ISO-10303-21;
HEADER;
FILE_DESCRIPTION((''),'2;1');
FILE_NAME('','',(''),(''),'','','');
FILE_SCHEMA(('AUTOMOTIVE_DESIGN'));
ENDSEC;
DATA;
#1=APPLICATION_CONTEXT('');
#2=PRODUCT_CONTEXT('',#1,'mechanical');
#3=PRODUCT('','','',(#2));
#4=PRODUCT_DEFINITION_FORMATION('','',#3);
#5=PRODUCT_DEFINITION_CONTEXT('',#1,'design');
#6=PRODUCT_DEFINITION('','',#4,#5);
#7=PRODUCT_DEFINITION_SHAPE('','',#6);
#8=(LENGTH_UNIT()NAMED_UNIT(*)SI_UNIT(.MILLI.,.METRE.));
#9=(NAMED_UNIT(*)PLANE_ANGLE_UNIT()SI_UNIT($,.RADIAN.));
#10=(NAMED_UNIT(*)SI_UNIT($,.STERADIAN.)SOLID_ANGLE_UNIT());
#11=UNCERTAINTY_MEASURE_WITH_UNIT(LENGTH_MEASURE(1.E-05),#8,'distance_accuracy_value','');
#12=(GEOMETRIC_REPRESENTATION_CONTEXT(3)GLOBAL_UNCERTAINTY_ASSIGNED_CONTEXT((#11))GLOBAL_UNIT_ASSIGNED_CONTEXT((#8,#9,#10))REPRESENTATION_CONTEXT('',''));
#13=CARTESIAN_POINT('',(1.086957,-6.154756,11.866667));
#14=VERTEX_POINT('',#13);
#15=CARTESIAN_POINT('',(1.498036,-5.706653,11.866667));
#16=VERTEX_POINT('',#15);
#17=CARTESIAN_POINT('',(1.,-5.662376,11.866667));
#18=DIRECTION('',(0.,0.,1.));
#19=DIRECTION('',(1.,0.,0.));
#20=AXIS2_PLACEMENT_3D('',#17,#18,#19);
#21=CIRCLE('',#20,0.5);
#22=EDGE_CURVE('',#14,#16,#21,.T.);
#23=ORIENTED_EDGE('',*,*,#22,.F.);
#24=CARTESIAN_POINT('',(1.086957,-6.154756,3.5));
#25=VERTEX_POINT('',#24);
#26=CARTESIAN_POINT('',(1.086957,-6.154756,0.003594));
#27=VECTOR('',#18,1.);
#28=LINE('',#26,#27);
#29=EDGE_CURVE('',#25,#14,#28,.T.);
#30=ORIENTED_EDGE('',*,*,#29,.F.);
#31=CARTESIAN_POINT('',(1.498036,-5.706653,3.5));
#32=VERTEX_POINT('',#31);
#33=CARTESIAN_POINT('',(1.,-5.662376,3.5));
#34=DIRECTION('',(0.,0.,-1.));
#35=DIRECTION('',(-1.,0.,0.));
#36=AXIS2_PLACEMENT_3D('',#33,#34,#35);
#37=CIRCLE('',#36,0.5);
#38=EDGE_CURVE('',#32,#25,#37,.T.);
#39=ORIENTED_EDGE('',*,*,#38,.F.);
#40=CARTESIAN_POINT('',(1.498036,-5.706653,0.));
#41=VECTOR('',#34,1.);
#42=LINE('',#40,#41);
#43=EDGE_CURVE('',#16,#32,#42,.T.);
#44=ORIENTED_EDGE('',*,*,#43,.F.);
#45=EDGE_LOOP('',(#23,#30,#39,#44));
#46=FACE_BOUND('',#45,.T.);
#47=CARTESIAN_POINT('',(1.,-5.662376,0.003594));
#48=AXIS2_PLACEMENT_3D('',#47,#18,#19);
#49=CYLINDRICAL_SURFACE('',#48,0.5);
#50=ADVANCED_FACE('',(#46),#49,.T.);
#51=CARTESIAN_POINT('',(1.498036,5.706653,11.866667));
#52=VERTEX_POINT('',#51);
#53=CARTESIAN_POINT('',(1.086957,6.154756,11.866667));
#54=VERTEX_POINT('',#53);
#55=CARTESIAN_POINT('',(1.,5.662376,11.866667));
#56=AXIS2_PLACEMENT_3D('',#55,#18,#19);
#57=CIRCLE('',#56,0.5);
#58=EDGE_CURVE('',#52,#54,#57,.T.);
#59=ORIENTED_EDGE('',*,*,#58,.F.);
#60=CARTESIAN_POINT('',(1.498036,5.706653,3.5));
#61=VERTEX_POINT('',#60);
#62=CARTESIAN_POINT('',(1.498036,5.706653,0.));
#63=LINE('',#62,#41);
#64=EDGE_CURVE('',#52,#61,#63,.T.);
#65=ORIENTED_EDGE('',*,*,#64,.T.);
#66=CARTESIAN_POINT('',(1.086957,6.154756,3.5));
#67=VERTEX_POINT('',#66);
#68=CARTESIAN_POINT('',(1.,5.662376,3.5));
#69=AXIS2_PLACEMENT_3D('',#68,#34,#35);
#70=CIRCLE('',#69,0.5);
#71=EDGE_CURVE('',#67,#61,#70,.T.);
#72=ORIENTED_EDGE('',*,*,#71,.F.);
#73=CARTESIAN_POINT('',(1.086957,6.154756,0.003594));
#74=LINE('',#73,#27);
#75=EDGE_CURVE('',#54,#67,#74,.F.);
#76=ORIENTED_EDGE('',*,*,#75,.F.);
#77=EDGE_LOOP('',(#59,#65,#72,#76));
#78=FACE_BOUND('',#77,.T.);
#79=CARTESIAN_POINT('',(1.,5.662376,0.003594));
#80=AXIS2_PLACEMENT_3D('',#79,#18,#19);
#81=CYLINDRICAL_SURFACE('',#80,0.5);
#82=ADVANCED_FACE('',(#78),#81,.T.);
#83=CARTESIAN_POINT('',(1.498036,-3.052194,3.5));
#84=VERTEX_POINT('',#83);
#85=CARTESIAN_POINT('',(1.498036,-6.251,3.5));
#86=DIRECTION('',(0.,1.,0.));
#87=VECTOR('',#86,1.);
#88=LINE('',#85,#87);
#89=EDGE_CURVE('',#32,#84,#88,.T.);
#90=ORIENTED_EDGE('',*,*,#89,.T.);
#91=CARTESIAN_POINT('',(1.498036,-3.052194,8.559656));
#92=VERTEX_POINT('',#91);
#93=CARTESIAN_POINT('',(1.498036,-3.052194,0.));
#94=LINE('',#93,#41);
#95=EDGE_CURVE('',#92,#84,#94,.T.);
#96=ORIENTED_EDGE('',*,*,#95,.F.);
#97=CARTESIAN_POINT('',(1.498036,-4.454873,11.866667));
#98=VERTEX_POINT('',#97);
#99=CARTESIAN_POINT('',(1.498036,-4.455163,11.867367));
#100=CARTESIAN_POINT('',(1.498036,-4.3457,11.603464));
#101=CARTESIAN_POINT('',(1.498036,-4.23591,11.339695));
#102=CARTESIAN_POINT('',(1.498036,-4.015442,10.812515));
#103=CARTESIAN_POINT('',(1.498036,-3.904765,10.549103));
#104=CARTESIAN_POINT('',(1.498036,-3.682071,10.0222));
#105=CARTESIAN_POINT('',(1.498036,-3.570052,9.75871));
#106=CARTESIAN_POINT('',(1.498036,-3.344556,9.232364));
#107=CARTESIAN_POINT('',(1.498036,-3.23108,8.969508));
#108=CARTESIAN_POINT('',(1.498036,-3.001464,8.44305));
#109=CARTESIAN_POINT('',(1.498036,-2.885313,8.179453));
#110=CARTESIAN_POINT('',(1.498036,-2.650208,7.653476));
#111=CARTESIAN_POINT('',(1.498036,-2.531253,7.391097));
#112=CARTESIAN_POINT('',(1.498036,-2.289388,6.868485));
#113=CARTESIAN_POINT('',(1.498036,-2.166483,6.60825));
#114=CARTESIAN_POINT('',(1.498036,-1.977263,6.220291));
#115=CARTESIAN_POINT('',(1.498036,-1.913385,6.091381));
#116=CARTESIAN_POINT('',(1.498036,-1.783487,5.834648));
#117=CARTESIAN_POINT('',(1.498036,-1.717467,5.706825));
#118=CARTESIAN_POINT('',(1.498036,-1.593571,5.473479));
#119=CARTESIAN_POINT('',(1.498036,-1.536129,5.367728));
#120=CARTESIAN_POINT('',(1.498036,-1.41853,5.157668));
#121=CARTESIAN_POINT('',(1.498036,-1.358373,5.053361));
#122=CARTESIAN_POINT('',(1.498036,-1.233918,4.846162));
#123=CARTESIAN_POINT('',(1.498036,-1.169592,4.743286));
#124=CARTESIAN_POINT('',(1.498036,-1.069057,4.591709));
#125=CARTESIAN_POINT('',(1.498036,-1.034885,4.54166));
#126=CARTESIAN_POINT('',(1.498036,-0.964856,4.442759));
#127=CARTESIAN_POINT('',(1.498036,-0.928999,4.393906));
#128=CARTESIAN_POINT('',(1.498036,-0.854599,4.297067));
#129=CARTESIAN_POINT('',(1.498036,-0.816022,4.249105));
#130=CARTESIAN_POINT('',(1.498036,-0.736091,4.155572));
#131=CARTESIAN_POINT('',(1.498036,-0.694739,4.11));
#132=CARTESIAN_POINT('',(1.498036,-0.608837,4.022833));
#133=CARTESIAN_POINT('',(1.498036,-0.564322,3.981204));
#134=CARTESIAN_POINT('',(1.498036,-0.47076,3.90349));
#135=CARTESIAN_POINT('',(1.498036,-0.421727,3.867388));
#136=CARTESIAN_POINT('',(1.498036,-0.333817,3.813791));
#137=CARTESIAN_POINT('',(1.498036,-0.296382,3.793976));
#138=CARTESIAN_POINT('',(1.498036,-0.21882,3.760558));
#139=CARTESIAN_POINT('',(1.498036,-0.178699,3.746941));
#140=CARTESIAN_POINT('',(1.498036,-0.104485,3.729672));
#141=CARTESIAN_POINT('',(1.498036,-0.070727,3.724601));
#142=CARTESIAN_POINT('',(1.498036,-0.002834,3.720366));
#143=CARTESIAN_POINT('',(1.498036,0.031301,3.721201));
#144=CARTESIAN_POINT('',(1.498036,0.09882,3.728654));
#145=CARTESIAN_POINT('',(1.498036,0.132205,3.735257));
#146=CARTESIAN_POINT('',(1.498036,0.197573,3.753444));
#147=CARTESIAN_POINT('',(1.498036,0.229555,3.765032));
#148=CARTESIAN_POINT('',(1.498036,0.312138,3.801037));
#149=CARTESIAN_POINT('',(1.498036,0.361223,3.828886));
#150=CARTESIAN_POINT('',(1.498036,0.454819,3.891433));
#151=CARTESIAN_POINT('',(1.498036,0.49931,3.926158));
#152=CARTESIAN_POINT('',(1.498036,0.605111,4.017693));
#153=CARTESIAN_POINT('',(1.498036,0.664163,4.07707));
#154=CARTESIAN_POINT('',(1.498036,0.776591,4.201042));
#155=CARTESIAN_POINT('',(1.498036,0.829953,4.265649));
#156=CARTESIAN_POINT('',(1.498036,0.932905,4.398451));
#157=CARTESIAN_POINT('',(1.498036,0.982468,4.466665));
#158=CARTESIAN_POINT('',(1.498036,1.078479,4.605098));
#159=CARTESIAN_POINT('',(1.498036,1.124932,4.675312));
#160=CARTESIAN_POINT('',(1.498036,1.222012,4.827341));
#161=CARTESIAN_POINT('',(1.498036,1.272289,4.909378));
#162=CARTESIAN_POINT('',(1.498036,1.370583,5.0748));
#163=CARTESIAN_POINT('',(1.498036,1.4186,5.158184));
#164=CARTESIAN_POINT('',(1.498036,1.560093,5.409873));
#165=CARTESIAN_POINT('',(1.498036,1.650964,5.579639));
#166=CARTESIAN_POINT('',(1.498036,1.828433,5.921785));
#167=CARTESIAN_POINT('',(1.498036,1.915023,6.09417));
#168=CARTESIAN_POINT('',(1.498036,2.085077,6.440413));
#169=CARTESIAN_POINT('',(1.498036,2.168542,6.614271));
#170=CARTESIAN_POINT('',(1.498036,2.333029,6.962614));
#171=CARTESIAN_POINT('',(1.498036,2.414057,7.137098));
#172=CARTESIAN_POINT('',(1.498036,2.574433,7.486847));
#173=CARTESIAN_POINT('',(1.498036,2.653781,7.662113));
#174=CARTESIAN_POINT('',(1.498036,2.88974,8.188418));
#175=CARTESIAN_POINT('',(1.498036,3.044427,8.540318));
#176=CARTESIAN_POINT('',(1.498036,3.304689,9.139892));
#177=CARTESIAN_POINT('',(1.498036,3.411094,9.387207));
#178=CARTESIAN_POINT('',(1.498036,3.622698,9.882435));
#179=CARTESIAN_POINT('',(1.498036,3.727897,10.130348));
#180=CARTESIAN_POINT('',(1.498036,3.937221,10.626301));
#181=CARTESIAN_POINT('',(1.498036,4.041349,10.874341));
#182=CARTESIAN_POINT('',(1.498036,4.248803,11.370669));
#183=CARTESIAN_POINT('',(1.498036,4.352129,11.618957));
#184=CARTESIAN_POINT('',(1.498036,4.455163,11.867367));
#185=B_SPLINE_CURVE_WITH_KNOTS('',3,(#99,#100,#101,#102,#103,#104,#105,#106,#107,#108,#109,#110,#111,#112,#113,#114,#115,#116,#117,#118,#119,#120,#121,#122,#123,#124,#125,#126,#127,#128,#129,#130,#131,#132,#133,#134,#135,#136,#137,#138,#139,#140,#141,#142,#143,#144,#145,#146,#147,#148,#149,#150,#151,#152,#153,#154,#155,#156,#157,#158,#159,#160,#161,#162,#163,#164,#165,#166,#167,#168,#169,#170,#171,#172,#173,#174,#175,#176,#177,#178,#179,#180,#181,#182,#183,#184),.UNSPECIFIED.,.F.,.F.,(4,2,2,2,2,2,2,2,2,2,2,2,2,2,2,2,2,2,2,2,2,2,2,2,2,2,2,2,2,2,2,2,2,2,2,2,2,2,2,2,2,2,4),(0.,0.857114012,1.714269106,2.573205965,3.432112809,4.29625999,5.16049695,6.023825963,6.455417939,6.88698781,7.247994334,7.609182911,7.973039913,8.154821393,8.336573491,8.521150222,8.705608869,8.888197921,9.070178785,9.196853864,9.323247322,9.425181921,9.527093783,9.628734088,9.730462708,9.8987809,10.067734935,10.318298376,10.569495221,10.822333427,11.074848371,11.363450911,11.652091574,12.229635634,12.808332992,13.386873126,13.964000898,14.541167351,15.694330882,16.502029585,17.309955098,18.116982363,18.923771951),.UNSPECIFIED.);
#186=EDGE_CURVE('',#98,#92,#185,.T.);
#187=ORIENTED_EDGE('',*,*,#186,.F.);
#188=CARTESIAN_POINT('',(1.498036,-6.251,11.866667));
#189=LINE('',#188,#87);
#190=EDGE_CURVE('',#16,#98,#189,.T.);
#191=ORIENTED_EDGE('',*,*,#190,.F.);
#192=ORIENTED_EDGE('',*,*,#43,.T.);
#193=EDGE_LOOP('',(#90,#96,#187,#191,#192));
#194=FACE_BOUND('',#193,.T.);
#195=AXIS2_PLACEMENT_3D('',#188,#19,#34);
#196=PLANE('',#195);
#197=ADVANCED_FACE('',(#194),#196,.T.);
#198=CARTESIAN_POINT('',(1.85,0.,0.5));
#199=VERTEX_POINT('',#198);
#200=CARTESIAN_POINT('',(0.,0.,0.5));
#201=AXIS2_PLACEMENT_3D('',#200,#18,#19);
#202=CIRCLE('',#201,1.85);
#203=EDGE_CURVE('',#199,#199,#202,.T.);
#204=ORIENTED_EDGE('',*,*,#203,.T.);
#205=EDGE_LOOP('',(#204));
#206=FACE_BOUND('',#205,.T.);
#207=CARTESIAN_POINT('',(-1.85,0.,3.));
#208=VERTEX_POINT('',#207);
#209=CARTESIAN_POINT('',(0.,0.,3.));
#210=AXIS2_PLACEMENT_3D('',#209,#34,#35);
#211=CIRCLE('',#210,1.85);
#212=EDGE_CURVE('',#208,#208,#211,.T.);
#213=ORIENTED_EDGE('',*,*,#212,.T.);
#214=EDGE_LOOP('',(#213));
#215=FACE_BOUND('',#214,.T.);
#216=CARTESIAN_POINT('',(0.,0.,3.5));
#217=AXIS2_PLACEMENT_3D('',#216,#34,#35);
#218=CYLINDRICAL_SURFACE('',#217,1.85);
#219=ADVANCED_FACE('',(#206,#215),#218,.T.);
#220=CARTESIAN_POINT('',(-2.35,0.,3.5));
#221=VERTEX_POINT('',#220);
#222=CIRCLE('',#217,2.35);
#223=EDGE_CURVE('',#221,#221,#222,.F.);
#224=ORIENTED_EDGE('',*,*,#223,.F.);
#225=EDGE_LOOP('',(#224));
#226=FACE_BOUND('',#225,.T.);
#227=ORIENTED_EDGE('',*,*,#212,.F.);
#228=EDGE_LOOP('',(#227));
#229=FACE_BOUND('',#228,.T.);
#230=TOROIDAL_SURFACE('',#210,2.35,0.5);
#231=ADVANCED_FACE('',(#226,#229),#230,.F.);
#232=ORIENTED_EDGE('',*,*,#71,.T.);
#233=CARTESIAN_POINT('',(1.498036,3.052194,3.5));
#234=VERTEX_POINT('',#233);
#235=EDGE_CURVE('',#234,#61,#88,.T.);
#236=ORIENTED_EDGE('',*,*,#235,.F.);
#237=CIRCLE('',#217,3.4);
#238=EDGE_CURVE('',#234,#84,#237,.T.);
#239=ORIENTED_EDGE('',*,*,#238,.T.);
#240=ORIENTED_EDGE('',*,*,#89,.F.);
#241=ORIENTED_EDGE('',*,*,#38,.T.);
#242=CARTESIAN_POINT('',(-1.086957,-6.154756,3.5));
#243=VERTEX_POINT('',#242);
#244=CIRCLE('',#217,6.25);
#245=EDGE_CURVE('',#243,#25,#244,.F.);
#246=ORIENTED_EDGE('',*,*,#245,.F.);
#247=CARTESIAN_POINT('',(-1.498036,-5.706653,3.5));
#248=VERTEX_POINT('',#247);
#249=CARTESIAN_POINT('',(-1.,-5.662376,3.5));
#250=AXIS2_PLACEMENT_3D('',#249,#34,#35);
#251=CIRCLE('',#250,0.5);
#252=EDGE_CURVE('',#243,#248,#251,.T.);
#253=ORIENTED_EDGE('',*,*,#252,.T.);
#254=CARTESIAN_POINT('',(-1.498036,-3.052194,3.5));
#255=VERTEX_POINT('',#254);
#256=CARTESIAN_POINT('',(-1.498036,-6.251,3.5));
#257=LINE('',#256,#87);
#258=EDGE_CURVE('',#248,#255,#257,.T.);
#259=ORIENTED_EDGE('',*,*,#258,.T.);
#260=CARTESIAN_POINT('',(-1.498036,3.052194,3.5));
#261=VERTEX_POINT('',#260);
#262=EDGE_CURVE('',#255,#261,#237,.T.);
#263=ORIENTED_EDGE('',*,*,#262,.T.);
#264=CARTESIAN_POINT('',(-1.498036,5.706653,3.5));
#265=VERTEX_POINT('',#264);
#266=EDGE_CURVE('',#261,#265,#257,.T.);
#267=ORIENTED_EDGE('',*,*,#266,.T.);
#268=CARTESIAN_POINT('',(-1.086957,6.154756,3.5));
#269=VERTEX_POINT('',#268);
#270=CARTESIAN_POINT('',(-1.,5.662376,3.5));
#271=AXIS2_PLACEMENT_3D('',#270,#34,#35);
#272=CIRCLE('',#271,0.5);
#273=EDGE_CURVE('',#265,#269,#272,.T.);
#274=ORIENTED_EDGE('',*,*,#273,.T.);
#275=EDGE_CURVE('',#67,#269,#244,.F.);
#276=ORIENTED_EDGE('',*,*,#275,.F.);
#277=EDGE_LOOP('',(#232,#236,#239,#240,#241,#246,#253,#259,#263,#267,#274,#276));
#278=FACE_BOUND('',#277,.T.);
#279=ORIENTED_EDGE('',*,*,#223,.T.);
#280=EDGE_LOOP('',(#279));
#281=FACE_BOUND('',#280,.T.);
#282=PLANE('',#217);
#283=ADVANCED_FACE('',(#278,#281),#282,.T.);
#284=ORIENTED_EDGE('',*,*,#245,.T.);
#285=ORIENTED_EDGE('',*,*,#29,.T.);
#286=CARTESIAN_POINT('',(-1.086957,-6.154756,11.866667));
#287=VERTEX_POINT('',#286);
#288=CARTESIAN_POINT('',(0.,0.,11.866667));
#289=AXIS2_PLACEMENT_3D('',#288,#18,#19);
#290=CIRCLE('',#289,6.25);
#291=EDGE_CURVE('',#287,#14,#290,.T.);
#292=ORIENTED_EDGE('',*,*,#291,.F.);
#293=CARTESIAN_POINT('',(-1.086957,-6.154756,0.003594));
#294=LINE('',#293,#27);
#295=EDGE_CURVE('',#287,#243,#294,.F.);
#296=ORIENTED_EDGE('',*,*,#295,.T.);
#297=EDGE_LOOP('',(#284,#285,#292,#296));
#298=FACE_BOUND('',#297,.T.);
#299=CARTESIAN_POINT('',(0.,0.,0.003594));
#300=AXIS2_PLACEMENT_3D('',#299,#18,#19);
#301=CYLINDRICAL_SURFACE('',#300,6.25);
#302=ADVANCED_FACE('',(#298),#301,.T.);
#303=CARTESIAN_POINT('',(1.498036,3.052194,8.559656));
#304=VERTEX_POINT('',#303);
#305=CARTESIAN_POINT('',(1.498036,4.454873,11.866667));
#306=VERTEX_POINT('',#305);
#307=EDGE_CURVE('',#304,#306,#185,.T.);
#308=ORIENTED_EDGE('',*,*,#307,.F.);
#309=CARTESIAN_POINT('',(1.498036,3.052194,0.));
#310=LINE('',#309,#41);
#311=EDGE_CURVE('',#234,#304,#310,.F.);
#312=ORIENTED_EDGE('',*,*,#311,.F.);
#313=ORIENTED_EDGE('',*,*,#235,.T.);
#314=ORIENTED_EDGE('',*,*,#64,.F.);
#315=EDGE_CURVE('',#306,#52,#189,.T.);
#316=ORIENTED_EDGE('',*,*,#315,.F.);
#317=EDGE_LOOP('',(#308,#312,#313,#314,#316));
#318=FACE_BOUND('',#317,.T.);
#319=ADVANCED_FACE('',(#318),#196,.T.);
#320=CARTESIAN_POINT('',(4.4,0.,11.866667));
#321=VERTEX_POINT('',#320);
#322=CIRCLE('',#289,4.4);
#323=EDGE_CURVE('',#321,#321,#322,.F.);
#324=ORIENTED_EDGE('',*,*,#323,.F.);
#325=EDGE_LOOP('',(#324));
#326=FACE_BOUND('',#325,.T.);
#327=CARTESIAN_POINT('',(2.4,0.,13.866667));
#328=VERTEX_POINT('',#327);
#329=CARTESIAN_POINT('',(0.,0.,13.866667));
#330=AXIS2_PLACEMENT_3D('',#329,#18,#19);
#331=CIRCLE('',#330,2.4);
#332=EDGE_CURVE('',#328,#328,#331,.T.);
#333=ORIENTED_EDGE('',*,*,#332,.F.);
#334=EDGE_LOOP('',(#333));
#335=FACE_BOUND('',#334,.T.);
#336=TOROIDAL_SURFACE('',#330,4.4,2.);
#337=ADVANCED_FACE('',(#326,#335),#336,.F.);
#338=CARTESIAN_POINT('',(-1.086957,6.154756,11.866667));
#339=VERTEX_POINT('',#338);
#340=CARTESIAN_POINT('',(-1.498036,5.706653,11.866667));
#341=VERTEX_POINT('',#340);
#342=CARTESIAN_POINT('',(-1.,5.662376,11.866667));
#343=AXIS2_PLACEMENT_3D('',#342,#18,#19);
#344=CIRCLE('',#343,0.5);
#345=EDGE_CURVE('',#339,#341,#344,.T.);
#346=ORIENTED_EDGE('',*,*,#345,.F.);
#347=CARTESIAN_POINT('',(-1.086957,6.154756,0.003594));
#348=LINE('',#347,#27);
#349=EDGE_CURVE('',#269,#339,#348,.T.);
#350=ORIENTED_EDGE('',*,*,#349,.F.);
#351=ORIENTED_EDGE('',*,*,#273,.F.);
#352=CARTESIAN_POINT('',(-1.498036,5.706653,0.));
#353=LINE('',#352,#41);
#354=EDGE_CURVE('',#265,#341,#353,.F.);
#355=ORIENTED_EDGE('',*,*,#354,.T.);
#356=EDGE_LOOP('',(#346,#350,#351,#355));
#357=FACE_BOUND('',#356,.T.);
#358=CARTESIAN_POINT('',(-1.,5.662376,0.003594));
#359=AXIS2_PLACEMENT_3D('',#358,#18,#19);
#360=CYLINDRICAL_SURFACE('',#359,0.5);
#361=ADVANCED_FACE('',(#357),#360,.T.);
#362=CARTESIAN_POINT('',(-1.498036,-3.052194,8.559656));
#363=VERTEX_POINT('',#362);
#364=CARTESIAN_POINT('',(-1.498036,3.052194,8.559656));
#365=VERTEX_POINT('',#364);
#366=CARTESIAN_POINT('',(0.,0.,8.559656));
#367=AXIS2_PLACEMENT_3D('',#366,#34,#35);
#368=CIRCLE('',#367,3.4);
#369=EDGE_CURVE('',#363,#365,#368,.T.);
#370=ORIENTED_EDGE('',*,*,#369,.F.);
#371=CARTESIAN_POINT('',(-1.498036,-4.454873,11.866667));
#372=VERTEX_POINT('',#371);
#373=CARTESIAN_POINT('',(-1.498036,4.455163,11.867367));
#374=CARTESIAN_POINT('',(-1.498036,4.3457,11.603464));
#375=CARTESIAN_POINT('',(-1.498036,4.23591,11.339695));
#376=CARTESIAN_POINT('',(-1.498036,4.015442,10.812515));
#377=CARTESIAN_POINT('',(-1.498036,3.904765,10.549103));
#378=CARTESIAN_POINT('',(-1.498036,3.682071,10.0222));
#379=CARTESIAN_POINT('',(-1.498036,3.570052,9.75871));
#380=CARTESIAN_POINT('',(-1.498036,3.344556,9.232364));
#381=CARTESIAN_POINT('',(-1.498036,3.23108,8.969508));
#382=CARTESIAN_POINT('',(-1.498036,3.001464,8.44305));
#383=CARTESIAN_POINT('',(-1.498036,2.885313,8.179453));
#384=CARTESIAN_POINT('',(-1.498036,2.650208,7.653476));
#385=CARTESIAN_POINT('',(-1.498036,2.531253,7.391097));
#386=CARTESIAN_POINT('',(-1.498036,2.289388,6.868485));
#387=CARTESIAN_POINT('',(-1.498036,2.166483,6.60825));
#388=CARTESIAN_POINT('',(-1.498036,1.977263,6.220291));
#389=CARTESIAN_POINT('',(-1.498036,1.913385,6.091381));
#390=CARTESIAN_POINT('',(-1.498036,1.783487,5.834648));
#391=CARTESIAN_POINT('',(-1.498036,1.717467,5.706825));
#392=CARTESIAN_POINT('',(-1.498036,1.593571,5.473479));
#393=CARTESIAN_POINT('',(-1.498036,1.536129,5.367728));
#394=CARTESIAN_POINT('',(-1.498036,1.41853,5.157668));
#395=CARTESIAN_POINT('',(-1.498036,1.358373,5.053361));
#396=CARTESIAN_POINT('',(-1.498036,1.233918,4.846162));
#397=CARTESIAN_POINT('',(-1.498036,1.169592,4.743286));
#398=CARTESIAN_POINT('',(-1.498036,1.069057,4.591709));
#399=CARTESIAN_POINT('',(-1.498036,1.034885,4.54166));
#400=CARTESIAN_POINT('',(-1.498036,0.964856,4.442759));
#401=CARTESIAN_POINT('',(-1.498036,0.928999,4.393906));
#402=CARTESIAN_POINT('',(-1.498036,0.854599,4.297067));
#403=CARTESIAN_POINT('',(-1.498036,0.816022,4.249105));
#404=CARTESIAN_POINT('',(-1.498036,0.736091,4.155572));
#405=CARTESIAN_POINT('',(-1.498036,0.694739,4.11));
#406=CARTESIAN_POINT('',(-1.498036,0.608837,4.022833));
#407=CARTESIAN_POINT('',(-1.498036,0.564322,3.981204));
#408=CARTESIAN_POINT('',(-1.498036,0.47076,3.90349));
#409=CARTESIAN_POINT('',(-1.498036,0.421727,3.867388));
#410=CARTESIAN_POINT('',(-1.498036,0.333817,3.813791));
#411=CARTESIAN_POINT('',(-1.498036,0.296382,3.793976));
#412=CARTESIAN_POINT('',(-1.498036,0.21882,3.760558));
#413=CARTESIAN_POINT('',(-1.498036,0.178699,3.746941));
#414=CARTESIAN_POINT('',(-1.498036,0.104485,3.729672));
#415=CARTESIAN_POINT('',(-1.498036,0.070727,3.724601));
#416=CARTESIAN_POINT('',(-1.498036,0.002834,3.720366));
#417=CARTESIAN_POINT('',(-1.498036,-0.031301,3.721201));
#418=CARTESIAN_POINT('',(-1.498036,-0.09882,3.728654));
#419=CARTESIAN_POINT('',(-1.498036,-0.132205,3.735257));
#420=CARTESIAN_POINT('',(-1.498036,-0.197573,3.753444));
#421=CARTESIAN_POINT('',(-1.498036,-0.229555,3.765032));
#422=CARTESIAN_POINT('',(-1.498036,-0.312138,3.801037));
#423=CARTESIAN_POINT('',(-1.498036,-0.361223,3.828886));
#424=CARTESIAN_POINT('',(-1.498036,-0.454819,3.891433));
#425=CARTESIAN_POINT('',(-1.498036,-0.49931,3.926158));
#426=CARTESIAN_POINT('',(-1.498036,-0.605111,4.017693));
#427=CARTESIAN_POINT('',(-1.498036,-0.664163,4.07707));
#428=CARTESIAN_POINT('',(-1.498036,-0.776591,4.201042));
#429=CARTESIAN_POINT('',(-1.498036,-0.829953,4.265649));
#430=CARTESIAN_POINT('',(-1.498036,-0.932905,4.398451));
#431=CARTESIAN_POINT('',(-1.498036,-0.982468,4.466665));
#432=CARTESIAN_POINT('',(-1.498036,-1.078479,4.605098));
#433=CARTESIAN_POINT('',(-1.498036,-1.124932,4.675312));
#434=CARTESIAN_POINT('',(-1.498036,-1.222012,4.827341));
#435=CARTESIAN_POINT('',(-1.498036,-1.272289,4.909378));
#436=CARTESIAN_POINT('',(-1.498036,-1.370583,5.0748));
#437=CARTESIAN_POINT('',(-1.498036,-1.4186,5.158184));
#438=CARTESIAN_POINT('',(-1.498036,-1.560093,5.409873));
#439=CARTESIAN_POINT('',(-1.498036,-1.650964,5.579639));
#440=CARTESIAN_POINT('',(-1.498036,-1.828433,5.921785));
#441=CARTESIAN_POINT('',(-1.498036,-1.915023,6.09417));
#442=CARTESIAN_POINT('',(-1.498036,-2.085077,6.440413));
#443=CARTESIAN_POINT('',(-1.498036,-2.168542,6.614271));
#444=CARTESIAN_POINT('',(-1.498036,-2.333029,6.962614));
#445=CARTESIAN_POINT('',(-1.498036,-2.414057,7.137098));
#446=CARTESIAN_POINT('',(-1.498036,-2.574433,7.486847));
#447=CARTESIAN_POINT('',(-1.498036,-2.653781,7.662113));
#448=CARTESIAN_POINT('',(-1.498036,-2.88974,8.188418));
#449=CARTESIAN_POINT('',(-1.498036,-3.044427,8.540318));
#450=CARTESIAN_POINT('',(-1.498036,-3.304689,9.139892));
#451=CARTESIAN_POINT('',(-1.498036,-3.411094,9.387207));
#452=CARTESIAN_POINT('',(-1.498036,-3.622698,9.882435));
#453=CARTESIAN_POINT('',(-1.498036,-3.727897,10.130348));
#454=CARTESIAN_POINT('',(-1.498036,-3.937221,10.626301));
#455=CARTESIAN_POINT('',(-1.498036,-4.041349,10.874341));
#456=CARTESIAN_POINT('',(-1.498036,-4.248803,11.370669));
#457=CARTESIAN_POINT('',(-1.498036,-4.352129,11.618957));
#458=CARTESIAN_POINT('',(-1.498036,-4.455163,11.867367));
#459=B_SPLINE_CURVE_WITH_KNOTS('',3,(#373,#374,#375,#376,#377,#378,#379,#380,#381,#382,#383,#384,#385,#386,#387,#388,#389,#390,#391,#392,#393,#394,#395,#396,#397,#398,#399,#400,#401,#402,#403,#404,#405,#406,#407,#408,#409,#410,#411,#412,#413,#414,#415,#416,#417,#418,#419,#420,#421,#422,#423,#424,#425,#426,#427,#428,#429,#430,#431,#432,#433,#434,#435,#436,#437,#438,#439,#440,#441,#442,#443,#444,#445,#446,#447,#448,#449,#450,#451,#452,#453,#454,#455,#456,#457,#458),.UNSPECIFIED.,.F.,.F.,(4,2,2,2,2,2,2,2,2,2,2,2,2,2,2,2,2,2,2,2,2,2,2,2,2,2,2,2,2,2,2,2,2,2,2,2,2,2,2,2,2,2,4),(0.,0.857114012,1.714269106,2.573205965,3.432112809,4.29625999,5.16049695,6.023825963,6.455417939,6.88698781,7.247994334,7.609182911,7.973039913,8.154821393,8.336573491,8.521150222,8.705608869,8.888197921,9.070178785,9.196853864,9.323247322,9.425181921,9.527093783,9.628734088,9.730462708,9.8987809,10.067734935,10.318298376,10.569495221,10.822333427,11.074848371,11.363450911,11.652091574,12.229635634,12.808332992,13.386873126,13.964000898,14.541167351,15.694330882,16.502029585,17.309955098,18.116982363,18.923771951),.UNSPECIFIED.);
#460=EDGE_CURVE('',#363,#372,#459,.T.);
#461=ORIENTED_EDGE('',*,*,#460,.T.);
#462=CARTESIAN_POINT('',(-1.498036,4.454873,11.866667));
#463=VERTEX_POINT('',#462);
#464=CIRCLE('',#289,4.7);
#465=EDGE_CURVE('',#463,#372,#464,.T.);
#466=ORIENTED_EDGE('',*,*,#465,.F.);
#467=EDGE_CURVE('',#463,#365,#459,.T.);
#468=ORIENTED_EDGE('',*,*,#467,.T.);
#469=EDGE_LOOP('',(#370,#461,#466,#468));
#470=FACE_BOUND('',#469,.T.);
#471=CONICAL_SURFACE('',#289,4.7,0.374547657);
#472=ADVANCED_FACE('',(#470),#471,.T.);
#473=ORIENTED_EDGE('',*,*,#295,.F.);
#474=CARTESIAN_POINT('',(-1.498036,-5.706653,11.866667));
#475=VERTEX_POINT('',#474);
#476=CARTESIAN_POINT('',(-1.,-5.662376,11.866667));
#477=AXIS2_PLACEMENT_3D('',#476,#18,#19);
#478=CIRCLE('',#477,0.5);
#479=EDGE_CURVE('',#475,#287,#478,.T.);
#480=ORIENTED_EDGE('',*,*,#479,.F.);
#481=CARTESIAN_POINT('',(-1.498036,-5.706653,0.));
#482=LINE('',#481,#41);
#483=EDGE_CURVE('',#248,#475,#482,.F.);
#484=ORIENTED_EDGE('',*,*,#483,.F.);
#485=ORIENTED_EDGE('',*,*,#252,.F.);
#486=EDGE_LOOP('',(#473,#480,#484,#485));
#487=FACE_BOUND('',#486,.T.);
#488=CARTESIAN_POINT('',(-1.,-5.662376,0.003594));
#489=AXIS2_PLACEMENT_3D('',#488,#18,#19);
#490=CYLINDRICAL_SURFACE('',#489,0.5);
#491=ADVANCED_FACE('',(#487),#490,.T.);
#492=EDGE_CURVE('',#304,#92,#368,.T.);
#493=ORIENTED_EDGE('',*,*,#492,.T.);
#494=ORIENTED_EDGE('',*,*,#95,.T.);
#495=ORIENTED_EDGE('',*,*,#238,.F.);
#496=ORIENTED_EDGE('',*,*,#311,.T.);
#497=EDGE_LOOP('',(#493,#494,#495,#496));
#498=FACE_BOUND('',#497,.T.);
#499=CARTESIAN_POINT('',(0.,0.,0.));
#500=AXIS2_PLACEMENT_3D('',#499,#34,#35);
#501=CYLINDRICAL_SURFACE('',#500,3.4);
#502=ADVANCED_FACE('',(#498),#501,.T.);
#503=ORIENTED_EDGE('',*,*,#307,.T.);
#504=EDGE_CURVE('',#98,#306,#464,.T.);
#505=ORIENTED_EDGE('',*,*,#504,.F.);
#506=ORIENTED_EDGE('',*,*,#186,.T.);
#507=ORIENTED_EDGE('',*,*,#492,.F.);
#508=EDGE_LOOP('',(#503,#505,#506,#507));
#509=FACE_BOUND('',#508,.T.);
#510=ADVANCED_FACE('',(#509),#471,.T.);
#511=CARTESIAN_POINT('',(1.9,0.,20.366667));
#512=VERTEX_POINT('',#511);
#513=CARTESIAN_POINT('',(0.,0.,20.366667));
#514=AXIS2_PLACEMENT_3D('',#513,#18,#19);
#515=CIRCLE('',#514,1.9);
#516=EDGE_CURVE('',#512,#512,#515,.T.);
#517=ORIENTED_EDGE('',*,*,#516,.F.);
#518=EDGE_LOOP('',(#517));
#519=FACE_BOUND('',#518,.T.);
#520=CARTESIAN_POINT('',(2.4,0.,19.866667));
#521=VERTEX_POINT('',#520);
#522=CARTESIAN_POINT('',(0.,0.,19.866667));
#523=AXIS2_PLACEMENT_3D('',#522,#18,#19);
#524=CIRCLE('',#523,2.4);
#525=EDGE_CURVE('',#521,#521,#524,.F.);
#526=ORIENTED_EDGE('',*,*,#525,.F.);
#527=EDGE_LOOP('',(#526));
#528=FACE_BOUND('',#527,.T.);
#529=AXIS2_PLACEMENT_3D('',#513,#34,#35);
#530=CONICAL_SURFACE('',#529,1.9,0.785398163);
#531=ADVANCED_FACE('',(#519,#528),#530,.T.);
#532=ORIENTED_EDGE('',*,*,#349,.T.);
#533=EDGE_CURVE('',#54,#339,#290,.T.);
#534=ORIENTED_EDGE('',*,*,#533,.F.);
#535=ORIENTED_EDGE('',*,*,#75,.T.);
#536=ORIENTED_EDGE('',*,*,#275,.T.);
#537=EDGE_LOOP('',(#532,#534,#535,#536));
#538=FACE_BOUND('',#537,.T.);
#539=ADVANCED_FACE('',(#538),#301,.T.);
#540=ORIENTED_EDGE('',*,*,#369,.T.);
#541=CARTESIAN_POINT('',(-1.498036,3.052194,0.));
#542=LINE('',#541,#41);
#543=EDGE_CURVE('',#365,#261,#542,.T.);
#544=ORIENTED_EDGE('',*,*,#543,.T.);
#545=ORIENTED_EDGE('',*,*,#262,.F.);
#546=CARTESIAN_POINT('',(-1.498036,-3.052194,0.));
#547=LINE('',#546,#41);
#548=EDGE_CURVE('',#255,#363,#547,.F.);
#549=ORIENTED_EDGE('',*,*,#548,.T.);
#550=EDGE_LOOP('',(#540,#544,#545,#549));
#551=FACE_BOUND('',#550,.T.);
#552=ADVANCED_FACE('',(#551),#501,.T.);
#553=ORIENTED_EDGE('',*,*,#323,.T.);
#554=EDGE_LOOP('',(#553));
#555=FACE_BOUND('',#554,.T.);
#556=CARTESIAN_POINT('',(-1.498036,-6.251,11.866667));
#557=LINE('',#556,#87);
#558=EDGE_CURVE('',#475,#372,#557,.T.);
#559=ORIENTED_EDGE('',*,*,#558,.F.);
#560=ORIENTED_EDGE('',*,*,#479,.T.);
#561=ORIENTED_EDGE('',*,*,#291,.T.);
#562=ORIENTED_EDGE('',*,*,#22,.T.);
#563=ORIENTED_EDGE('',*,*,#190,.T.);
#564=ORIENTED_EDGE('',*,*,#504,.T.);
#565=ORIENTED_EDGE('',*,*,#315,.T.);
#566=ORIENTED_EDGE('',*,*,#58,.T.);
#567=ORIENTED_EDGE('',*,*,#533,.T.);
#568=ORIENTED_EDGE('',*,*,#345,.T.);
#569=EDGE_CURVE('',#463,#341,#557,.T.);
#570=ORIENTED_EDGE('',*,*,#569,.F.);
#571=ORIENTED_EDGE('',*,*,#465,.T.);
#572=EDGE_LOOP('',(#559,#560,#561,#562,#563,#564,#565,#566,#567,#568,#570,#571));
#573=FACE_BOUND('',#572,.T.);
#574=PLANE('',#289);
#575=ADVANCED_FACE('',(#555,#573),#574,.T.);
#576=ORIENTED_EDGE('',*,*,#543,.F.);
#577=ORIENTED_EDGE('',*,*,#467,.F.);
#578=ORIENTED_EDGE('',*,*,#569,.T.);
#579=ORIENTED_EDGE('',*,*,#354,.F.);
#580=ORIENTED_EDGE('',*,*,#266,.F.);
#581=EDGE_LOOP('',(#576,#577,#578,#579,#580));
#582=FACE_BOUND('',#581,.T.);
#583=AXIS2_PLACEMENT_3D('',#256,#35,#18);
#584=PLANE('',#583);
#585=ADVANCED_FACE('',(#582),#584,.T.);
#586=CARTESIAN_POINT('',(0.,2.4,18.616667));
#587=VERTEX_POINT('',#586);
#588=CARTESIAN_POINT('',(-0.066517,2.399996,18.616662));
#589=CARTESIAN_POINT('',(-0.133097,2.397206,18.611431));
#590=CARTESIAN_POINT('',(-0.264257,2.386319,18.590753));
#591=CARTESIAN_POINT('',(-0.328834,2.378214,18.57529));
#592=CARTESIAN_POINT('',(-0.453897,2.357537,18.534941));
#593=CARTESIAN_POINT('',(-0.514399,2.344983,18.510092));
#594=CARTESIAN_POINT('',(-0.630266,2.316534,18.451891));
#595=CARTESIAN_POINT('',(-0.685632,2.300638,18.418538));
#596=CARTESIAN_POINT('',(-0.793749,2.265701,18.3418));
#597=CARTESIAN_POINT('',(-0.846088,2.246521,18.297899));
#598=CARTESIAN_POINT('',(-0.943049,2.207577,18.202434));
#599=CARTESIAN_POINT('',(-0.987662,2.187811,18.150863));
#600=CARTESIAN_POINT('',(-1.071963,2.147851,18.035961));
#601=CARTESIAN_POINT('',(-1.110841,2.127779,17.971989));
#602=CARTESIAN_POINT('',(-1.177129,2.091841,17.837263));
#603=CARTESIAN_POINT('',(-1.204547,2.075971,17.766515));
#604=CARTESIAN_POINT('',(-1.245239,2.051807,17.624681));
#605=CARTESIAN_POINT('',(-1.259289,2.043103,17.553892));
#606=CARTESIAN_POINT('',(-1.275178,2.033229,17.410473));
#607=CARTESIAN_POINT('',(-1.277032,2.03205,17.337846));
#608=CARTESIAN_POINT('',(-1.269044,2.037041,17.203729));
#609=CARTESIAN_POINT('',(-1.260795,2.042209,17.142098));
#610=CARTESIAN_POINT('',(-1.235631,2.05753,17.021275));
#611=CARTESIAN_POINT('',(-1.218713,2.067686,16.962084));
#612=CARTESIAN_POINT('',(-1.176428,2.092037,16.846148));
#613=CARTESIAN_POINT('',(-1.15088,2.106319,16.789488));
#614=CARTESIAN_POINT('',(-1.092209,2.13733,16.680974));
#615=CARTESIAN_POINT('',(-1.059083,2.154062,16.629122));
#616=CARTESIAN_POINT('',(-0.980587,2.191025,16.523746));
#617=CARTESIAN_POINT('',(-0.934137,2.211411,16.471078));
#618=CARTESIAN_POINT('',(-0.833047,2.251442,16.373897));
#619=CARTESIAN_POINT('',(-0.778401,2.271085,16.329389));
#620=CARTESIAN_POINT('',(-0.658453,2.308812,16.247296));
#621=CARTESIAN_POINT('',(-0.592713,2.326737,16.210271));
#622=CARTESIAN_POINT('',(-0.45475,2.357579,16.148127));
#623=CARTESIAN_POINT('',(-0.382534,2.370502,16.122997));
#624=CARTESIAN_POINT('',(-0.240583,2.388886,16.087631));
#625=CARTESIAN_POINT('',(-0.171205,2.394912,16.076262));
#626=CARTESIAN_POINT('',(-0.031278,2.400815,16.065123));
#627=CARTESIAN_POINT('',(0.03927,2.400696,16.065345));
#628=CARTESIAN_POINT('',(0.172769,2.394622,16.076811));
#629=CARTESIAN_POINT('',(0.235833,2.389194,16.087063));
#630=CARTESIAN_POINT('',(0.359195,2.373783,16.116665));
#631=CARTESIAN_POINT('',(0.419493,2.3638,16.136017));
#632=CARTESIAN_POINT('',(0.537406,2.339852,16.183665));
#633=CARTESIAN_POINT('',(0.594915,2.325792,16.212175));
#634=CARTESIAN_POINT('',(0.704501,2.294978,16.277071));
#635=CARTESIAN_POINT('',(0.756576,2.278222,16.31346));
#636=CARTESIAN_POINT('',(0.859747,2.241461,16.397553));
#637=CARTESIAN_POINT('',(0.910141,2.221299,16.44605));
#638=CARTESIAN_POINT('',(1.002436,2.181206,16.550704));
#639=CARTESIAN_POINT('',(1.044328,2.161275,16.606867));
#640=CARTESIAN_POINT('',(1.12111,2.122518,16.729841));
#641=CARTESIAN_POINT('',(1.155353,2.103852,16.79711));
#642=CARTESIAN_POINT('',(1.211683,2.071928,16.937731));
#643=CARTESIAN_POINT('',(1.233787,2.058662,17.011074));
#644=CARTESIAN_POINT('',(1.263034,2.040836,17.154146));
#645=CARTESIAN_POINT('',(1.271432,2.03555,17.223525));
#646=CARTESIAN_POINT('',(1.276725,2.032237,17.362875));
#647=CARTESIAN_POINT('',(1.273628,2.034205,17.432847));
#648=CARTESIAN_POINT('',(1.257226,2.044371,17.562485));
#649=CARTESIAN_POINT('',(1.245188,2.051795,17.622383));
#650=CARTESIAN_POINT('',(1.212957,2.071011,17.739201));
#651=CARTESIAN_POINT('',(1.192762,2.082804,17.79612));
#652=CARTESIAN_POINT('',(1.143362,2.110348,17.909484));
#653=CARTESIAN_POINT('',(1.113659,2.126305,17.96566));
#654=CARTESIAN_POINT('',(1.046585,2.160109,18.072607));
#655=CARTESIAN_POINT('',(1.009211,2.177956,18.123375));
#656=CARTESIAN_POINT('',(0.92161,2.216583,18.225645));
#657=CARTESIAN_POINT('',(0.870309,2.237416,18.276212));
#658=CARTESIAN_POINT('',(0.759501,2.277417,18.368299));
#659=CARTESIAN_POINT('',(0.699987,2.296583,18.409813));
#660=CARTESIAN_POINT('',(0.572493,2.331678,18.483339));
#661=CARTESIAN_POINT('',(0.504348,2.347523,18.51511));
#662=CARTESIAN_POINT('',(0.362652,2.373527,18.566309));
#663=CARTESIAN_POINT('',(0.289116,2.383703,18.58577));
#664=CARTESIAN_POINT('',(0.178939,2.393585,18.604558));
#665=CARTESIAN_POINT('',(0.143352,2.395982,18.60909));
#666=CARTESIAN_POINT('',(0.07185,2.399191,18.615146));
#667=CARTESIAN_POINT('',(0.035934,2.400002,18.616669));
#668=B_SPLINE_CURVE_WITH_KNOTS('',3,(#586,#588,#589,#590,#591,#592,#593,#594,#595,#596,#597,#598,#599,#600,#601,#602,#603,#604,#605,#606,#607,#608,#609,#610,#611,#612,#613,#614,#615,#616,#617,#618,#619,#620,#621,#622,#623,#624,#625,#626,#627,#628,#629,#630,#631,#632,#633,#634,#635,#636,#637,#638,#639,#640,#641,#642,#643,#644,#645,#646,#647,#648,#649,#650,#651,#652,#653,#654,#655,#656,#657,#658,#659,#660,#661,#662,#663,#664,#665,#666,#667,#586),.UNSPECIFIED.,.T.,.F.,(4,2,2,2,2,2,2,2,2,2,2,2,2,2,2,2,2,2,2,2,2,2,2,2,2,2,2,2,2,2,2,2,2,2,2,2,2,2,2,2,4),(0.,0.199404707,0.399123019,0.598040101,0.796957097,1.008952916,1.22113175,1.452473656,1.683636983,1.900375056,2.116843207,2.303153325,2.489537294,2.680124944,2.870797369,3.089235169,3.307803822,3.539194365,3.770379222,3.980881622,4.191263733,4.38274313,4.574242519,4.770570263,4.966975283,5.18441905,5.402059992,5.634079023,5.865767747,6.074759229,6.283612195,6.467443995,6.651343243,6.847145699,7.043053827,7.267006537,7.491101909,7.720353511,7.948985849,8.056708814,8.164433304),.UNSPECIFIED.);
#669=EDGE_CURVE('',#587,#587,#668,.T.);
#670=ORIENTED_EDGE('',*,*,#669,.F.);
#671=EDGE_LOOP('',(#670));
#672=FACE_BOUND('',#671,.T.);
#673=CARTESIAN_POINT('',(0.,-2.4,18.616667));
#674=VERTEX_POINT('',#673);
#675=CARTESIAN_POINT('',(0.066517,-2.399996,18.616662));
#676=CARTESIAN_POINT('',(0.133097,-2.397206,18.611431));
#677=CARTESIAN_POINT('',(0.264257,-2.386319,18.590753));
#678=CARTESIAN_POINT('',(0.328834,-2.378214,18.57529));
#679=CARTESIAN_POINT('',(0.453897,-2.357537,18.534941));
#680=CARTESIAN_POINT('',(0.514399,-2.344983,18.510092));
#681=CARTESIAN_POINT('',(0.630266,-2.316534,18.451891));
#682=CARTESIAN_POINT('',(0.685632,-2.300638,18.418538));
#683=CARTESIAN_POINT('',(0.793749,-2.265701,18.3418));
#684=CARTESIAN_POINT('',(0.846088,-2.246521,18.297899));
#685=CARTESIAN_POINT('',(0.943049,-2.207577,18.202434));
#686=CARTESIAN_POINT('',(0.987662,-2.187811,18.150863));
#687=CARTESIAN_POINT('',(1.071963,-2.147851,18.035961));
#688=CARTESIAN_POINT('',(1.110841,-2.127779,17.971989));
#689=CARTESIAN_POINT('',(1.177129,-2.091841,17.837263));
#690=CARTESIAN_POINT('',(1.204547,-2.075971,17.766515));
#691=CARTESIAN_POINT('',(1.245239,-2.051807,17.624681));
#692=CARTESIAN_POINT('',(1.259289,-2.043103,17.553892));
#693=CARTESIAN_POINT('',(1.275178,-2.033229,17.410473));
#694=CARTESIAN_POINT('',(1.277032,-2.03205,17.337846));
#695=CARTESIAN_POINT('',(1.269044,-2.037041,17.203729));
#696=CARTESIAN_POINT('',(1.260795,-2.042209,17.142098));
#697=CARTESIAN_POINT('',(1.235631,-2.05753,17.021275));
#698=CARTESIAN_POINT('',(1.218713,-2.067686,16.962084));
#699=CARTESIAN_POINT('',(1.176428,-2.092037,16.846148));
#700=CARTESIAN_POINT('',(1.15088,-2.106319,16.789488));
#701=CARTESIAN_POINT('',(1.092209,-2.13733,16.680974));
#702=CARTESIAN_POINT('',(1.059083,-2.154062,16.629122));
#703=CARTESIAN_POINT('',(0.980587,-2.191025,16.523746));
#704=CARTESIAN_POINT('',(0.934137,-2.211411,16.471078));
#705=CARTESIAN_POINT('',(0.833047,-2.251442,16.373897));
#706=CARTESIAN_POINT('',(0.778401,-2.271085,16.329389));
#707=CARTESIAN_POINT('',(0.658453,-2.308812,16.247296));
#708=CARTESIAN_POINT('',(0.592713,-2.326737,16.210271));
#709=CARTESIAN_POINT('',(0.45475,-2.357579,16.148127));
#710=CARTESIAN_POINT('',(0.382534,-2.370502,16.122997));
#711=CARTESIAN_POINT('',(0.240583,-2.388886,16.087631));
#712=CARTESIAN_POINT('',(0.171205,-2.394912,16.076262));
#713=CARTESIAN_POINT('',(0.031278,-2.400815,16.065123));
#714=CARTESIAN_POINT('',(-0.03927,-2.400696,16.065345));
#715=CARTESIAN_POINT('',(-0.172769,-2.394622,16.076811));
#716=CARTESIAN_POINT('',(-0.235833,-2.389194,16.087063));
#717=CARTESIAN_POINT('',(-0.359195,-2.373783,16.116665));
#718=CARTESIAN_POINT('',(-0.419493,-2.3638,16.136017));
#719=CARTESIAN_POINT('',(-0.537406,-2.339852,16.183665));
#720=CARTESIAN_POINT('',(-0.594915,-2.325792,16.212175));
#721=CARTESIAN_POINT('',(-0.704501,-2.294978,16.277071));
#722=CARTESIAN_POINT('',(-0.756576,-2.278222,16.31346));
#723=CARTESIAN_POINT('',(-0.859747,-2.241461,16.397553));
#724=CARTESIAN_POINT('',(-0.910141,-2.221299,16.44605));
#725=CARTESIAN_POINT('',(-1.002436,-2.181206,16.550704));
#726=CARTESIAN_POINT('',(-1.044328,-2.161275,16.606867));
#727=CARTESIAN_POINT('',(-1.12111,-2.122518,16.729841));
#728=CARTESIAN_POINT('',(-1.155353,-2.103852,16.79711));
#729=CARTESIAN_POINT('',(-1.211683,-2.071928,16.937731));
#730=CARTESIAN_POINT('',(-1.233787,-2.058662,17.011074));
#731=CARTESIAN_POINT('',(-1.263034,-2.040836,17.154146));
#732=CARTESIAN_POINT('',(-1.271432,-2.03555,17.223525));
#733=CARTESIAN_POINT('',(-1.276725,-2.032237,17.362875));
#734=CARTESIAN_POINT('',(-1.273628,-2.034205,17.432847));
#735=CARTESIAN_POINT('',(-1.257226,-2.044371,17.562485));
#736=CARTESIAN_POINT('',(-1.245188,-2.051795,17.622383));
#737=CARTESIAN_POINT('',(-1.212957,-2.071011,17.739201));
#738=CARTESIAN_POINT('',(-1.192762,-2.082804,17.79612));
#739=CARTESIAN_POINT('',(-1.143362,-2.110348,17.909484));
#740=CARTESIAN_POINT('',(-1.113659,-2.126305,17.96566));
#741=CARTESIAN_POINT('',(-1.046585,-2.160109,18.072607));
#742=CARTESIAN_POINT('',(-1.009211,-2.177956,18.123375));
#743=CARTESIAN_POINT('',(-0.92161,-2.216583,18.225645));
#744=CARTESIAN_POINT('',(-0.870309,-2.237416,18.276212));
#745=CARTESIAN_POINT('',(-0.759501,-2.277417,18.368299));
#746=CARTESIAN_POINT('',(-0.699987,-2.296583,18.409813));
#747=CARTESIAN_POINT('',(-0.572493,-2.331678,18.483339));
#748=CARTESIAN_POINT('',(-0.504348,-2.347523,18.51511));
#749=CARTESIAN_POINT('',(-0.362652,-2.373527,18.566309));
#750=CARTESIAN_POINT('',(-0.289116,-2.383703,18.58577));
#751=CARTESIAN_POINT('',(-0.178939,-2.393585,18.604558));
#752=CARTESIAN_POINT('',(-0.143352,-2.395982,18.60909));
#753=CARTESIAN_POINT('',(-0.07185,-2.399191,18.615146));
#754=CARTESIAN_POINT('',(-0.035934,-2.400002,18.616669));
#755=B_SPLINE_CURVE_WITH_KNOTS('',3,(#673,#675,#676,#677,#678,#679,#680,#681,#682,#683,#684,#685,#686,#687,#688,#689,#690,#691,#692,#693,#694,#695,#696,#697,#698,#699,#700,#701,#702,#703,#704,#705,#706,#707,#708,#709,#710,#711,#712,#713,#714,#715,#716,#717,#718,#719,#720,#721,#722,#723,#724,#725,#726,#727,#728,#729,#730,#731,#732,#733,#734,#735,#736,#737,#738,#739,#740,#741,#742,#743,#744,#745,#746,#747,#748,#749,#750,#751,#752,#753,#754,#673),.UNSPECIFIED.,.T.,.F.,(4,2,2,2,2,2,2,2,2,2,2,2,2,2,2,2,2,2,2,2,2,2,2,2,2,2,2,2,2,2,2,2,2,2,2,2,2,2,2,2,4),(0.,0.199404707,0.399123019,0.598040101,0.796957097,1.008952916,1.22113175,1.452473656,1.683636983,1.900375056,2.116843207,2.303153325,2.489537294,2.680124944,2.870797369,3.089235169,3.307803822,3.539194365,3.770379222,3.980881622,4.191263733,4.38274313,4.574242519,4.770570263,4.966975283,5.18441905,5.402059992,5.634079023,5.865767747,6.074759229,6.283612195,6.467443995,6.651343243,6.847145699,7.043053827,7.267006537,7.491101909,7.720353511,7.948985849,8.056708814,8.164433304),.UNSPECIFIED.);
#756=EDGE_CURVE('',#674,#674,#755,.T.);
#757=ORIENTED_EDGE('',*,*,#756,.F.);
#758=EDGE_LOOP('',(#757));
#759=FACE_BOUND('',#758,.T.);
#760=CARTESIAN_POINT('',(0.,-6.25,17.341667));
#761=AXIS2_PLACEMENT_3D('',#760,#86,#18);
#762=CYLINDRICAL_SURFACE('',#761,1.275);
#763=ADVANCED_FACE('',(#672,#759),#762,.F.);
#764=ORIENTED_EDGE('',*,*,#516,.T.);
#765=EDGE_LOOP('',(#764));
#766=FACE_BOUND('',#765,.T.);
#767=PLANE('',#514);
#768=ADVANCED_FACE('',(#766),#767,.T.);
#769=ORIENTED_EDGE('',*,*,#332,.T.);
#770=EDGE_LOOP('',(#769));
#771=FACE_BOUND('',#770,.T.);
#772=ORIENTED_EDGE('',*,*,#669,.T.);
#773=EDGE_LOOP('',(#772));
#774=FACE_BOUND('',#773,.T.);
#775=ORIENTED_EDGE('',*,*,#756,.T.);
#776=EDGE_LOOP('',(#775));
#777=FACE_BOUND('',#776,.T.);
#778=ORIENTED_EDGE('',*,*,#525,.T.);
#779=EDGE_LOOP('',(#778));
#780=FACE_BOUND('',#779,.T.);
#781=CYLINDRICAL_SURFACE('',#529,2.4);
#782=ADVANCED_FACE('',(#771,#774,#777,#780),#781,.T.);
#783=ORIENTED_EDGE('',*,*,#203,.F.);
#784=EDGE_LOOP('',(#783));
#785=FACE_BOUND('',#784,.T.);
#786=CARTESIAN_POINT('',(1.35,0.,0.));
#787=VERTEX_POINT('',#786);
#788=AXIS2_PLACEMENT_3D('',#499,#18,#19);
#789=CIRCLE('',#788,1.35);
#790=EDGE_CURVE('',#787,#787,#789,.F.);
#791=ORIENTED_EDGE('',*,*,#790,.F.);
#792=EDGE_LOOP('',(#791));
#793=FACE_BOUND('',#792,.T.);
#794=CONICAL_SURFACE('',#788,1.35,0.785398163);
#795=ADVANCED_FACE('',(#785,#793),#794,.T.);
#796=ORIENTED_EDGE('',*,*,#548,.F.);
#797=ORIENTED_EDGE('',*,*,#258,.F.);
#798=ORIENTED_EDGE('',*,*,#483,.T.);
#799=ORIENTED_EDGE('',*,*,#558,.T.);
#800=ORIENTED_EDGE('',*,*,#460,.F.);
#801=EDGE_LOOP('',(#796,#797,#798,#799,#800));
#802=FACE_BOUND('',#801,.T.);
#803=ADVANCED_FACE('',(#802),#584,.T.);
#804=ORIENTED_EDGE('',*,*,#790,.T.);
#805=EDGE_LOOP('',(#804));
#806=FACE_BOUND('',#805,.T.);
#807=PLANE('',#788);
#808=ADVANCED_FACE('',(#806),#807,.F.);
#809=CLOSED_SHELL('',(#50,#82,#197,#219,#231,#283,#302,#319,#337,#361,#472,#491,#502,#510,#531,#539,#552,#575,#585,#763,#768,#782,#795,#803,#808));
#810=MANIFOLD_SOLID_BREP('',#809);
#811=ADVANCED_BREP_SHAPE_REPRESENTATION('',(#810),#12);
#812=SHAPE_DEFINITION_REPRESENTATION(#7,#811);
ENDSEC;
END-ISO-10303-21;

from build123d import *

# Parameters (mm, degrees)
SKETCH1_R               = 4.7
BOSS_EXTRUDE1_DEPTH     = 11.866666667
SKETCH2_OUTSIDE_W       = 14.964
SKETCH2_OUTSIDE_H       = 14.964
SKETCH2_OUTSIDE_R       = 1.85
CUT_EXTRUDE1_DEPTH      = 3.5
BOSS_EXTRUDE2_START     = -8.366666667
BOSS_EXTRUDE2_DEPTH     = 8.366666667
FILLET1_R               = 0.5
FILLET2_R               = 0.5
SKETCH4_R               = 2.4
BOSS_EXTRUDE3_DEPTH     = 8.5
FILLET3_R               = 2
CHAMFER1_SIZE           = 0.5
CUT_EXTRUDE2_DEPTH      = 22.816361088
CUT_EXTRUDE2_DEPTH_BACK = 22.816361088
SKETCH5_R               = 1.275
BOSS_EXTRUDE4_START     = 3.5
BOSS_EXTRUDE4_DEPTH     = 8.366666667


# Read off the part's stored shape, not the designer's step: Boss-Extrude4
with BuildPart() as part:
    # Sketch1 → Boss-Extrude1 (new body)
    with BuildSketch(Plane.XY):
        Circle(SKETCH1_R)
    extrude(amount=BOSS_EXTRUDE1_DEPTH)

    # Sketch2 outside → Cut-Extrude1 (cut)
    with BuildSketch(Plane(origin=(0, 0, 0), x_dir=(-1, 0, 0), z_dir=(0, 0, -1))):
        Rectangle(SKETCH2_OUTSIDE_W, SKETCH2_OUTSIDE_H)
        Circle(SKETCH2_OUTSIDE_R, mode=Mode.SUBTRACT)
    extrude(amount=-CUT_EXTRUDE1_DEPTH, mode=Mode.SUBTRACT)

    # Sketch3 → Boss-Extrude2 (add)
    with BuildSketch(Plane.XY.offset(11.866666667).offset(BOSS_EXTRUDE2_START)):
        with BuildLine():
            Line((-1.5, 6.06733055), (-1.5, 4.45421149))
            ThreePointArc((-1.5, 4.45421149), (0, 4.7), (1.5, 4.45421149))
            Line((1.5, 4.45421149), (1.5, 6.06733055))
            ThreePointArc((1.5, 6.06733055), (0, 6.25), (-1.5, 6.06733055))
        make_face()
        with BuildLine():
            ThreePointArc((1.5, -4.45421149), (0, -4.7), (-1.5, -4.45421149))
            Line((-1.5, -4.45421149), (-1.5, -6.06733055))
            ThreePointArc((-1.5, -6.06733055), (0, -6.25), (1.5, -6.06733055))
            Line((1.5, -6.06733055), (1.5, -4.45421149))
        make_face()
    extrude(amount=BOSS_EXTRUDE2_DEPTH)

    # Fillet1
    fillet1_edges = [part.edges().sort_by_distance(p)[0] for p in [
        (-1.5, 6.06733055, 7.683333333),
        (-1.5, 4.45421149, 7.683333333),
        (1.5, 4.45421149, 7.683333333),
        (1.5, 6.06733055, 7.683333333),
        (1.5, -6.06733055, 7.683333333),
        (1.5, -4.45421149, 7.683333333),
        (-1.5, -4.45421149, 7.683333333),
        (-1.5, -6.06733055, 7.683333333),
    ]]
    fillet(fillet1_edges, radius=FILLET1_R)

    # Fillet2
    fillet2_edges = [part.edges().sort_by_distance(p)[0] for p in [
        (1.85, 0, 3.5),
    ]]
    fillet(fillet2_edges, radius=FILLET2_R)

    # Sketch4 → Boss-Extrude3 (add)
    with BuildSketch(Plane.XY.offset(11.866666667)):
        Circle(SKETCH4_R)
    extrude(amount=BOSS_EXTRUDE3_DEPTH)

    # Fillet3
    fillet3_edges = [part.edges().sort_by_distance(p)[0] for p in [
        (-2.4, 0, 11.866666667),
    ]]
    fillet(fillet3_edges, radius=FILLET3_R)

    # Chamfer1
    chamfer1_edges = [part.edges().sort_by_distance(p)[0] for p in [
        (-2.4, 0, 20.366666667),
        (1.85, 0, 0),
    ]]
    chamfer(chamfer1_edges, length=CHAMFER1_SIZE)

    # Sketch5 → Cut-Extrude2 (cut, two sides: drawn at the far end of the back side and taken through both)
    with BuildSketch(Plane(origin=(0, 0, 0), x_dir=(1, 0, 0), z_dir=(0, 1, 0)).offset(-CUT_EXTRUDE2_DEPTH_BACK)):
        with Locations(Location((0, -17.341666667, 0), (0, 0, 270))):
            Circle(SKETCH5_R)
    extrude(amount=CUT_EXTRUDE2_DEPTH + CUT_EXTRUDE2_DEPTH_BACK, mode=Mode.SUBTRACT)

    # Sketch6 → Cut-Revolve1 (revolve, cut)
    with BuildSketch(Plane(origin=(0, 0, 0), x_dir=(1, 0, 0), z_dir=(0, 1, 0)), mode=Mode.PRIVATE) as cut_revolve1_sk:
        Polygon((-4.7, -3.5), (-5.9, -3.5), (-5.9, -11.866666667), (-4.7, -11.866666667), (-3.4, -8.55965578), (-3.4, -3.5), align=None)
    revolve(cut_revolve1_sk.sketch.rotate(Axis((0, 0, 0), (0, 0, 1)), 180), axis=Axis((0, 0, 0), (0, 0, 1)), mode=Mode.SUBTRACT)


with BuildPart() as cut_revolve1_piece_1:
    # of the separate pieces the step leaves, piece 1, a body of its own (cut_revolve1_pieces)
    add(part.part.solids().sort_by_distance((2.4, 0, 19.866666667))[0])



with BuildPart() as cut_revolve1_piece_2:
    # of the separate pieces the step leaves, piece 2, a body of its own (cut_revolve1_pieces)
    add(part.part.solids().sort_by_distance((1.498035668, 5.706653059, 11.866666667))[0])


with BuildPart() as cut_revolve1_piece_3:
    # of the separate pieces the step leaves, piece 3, a body of its own (cut_revolve1_pieces)
    add(part.part.solids().sort_by_distance((1.498035668, -5.706653059, 11.866666667))[0])


with BuildPart() as cut_revolve1_piece_1_1:
    add(cut_revolve1_piece_1.part)

    add(cut_revolve1_piece_2.part)  # Boss-Extrude4 merges Cut-Revolve1 piece 2

    add(cut_revolve1_piece_3.part)  # Boss-Extrude4 merges Cut-Revolve1 piece 3
    # Boss-Extrude4 outline → Boss-Extrude4 (add)
    with BuildSketch(Plane.XY.offset(BOSS_EXTRUDE4_START)):
        with BuildLine():
            ThreePointArc((-1.498035668, -5.706653059), (0, -5.9), (1.498035668, -5.706653059))
            Line((1.498035668, -5.706653059), (1.498035668, -3.052194151))
            ThreePointArc((1.498035668, -3.052194151), (0, -3.4), (-1.498035668, -3.052194151))
            Line((-1.498035668, -3.052194151), (-1.498035668, -5.706653059))
        make_face()
        with BuildLine():
            Line((-1.498035668, 5.706653059), (-1.498035668, 3.052194151))
            ThreePointArc((-1.498035668, 3.052194151), (0, 3.4), (1.498035668, 3.052194151))
            Line((1.498035668, 3.052194151), (1.498035668, 5.706653059))
            ThreePointArc((1.498035668, 5.706653059), (0, 5.9), (-1.498035668, 5.706653059))
        make_face()
    extrude(amount=BOSS_EXTRUDE4_DEPTH)


solid = cut_revolve1_piece_1_1.part
